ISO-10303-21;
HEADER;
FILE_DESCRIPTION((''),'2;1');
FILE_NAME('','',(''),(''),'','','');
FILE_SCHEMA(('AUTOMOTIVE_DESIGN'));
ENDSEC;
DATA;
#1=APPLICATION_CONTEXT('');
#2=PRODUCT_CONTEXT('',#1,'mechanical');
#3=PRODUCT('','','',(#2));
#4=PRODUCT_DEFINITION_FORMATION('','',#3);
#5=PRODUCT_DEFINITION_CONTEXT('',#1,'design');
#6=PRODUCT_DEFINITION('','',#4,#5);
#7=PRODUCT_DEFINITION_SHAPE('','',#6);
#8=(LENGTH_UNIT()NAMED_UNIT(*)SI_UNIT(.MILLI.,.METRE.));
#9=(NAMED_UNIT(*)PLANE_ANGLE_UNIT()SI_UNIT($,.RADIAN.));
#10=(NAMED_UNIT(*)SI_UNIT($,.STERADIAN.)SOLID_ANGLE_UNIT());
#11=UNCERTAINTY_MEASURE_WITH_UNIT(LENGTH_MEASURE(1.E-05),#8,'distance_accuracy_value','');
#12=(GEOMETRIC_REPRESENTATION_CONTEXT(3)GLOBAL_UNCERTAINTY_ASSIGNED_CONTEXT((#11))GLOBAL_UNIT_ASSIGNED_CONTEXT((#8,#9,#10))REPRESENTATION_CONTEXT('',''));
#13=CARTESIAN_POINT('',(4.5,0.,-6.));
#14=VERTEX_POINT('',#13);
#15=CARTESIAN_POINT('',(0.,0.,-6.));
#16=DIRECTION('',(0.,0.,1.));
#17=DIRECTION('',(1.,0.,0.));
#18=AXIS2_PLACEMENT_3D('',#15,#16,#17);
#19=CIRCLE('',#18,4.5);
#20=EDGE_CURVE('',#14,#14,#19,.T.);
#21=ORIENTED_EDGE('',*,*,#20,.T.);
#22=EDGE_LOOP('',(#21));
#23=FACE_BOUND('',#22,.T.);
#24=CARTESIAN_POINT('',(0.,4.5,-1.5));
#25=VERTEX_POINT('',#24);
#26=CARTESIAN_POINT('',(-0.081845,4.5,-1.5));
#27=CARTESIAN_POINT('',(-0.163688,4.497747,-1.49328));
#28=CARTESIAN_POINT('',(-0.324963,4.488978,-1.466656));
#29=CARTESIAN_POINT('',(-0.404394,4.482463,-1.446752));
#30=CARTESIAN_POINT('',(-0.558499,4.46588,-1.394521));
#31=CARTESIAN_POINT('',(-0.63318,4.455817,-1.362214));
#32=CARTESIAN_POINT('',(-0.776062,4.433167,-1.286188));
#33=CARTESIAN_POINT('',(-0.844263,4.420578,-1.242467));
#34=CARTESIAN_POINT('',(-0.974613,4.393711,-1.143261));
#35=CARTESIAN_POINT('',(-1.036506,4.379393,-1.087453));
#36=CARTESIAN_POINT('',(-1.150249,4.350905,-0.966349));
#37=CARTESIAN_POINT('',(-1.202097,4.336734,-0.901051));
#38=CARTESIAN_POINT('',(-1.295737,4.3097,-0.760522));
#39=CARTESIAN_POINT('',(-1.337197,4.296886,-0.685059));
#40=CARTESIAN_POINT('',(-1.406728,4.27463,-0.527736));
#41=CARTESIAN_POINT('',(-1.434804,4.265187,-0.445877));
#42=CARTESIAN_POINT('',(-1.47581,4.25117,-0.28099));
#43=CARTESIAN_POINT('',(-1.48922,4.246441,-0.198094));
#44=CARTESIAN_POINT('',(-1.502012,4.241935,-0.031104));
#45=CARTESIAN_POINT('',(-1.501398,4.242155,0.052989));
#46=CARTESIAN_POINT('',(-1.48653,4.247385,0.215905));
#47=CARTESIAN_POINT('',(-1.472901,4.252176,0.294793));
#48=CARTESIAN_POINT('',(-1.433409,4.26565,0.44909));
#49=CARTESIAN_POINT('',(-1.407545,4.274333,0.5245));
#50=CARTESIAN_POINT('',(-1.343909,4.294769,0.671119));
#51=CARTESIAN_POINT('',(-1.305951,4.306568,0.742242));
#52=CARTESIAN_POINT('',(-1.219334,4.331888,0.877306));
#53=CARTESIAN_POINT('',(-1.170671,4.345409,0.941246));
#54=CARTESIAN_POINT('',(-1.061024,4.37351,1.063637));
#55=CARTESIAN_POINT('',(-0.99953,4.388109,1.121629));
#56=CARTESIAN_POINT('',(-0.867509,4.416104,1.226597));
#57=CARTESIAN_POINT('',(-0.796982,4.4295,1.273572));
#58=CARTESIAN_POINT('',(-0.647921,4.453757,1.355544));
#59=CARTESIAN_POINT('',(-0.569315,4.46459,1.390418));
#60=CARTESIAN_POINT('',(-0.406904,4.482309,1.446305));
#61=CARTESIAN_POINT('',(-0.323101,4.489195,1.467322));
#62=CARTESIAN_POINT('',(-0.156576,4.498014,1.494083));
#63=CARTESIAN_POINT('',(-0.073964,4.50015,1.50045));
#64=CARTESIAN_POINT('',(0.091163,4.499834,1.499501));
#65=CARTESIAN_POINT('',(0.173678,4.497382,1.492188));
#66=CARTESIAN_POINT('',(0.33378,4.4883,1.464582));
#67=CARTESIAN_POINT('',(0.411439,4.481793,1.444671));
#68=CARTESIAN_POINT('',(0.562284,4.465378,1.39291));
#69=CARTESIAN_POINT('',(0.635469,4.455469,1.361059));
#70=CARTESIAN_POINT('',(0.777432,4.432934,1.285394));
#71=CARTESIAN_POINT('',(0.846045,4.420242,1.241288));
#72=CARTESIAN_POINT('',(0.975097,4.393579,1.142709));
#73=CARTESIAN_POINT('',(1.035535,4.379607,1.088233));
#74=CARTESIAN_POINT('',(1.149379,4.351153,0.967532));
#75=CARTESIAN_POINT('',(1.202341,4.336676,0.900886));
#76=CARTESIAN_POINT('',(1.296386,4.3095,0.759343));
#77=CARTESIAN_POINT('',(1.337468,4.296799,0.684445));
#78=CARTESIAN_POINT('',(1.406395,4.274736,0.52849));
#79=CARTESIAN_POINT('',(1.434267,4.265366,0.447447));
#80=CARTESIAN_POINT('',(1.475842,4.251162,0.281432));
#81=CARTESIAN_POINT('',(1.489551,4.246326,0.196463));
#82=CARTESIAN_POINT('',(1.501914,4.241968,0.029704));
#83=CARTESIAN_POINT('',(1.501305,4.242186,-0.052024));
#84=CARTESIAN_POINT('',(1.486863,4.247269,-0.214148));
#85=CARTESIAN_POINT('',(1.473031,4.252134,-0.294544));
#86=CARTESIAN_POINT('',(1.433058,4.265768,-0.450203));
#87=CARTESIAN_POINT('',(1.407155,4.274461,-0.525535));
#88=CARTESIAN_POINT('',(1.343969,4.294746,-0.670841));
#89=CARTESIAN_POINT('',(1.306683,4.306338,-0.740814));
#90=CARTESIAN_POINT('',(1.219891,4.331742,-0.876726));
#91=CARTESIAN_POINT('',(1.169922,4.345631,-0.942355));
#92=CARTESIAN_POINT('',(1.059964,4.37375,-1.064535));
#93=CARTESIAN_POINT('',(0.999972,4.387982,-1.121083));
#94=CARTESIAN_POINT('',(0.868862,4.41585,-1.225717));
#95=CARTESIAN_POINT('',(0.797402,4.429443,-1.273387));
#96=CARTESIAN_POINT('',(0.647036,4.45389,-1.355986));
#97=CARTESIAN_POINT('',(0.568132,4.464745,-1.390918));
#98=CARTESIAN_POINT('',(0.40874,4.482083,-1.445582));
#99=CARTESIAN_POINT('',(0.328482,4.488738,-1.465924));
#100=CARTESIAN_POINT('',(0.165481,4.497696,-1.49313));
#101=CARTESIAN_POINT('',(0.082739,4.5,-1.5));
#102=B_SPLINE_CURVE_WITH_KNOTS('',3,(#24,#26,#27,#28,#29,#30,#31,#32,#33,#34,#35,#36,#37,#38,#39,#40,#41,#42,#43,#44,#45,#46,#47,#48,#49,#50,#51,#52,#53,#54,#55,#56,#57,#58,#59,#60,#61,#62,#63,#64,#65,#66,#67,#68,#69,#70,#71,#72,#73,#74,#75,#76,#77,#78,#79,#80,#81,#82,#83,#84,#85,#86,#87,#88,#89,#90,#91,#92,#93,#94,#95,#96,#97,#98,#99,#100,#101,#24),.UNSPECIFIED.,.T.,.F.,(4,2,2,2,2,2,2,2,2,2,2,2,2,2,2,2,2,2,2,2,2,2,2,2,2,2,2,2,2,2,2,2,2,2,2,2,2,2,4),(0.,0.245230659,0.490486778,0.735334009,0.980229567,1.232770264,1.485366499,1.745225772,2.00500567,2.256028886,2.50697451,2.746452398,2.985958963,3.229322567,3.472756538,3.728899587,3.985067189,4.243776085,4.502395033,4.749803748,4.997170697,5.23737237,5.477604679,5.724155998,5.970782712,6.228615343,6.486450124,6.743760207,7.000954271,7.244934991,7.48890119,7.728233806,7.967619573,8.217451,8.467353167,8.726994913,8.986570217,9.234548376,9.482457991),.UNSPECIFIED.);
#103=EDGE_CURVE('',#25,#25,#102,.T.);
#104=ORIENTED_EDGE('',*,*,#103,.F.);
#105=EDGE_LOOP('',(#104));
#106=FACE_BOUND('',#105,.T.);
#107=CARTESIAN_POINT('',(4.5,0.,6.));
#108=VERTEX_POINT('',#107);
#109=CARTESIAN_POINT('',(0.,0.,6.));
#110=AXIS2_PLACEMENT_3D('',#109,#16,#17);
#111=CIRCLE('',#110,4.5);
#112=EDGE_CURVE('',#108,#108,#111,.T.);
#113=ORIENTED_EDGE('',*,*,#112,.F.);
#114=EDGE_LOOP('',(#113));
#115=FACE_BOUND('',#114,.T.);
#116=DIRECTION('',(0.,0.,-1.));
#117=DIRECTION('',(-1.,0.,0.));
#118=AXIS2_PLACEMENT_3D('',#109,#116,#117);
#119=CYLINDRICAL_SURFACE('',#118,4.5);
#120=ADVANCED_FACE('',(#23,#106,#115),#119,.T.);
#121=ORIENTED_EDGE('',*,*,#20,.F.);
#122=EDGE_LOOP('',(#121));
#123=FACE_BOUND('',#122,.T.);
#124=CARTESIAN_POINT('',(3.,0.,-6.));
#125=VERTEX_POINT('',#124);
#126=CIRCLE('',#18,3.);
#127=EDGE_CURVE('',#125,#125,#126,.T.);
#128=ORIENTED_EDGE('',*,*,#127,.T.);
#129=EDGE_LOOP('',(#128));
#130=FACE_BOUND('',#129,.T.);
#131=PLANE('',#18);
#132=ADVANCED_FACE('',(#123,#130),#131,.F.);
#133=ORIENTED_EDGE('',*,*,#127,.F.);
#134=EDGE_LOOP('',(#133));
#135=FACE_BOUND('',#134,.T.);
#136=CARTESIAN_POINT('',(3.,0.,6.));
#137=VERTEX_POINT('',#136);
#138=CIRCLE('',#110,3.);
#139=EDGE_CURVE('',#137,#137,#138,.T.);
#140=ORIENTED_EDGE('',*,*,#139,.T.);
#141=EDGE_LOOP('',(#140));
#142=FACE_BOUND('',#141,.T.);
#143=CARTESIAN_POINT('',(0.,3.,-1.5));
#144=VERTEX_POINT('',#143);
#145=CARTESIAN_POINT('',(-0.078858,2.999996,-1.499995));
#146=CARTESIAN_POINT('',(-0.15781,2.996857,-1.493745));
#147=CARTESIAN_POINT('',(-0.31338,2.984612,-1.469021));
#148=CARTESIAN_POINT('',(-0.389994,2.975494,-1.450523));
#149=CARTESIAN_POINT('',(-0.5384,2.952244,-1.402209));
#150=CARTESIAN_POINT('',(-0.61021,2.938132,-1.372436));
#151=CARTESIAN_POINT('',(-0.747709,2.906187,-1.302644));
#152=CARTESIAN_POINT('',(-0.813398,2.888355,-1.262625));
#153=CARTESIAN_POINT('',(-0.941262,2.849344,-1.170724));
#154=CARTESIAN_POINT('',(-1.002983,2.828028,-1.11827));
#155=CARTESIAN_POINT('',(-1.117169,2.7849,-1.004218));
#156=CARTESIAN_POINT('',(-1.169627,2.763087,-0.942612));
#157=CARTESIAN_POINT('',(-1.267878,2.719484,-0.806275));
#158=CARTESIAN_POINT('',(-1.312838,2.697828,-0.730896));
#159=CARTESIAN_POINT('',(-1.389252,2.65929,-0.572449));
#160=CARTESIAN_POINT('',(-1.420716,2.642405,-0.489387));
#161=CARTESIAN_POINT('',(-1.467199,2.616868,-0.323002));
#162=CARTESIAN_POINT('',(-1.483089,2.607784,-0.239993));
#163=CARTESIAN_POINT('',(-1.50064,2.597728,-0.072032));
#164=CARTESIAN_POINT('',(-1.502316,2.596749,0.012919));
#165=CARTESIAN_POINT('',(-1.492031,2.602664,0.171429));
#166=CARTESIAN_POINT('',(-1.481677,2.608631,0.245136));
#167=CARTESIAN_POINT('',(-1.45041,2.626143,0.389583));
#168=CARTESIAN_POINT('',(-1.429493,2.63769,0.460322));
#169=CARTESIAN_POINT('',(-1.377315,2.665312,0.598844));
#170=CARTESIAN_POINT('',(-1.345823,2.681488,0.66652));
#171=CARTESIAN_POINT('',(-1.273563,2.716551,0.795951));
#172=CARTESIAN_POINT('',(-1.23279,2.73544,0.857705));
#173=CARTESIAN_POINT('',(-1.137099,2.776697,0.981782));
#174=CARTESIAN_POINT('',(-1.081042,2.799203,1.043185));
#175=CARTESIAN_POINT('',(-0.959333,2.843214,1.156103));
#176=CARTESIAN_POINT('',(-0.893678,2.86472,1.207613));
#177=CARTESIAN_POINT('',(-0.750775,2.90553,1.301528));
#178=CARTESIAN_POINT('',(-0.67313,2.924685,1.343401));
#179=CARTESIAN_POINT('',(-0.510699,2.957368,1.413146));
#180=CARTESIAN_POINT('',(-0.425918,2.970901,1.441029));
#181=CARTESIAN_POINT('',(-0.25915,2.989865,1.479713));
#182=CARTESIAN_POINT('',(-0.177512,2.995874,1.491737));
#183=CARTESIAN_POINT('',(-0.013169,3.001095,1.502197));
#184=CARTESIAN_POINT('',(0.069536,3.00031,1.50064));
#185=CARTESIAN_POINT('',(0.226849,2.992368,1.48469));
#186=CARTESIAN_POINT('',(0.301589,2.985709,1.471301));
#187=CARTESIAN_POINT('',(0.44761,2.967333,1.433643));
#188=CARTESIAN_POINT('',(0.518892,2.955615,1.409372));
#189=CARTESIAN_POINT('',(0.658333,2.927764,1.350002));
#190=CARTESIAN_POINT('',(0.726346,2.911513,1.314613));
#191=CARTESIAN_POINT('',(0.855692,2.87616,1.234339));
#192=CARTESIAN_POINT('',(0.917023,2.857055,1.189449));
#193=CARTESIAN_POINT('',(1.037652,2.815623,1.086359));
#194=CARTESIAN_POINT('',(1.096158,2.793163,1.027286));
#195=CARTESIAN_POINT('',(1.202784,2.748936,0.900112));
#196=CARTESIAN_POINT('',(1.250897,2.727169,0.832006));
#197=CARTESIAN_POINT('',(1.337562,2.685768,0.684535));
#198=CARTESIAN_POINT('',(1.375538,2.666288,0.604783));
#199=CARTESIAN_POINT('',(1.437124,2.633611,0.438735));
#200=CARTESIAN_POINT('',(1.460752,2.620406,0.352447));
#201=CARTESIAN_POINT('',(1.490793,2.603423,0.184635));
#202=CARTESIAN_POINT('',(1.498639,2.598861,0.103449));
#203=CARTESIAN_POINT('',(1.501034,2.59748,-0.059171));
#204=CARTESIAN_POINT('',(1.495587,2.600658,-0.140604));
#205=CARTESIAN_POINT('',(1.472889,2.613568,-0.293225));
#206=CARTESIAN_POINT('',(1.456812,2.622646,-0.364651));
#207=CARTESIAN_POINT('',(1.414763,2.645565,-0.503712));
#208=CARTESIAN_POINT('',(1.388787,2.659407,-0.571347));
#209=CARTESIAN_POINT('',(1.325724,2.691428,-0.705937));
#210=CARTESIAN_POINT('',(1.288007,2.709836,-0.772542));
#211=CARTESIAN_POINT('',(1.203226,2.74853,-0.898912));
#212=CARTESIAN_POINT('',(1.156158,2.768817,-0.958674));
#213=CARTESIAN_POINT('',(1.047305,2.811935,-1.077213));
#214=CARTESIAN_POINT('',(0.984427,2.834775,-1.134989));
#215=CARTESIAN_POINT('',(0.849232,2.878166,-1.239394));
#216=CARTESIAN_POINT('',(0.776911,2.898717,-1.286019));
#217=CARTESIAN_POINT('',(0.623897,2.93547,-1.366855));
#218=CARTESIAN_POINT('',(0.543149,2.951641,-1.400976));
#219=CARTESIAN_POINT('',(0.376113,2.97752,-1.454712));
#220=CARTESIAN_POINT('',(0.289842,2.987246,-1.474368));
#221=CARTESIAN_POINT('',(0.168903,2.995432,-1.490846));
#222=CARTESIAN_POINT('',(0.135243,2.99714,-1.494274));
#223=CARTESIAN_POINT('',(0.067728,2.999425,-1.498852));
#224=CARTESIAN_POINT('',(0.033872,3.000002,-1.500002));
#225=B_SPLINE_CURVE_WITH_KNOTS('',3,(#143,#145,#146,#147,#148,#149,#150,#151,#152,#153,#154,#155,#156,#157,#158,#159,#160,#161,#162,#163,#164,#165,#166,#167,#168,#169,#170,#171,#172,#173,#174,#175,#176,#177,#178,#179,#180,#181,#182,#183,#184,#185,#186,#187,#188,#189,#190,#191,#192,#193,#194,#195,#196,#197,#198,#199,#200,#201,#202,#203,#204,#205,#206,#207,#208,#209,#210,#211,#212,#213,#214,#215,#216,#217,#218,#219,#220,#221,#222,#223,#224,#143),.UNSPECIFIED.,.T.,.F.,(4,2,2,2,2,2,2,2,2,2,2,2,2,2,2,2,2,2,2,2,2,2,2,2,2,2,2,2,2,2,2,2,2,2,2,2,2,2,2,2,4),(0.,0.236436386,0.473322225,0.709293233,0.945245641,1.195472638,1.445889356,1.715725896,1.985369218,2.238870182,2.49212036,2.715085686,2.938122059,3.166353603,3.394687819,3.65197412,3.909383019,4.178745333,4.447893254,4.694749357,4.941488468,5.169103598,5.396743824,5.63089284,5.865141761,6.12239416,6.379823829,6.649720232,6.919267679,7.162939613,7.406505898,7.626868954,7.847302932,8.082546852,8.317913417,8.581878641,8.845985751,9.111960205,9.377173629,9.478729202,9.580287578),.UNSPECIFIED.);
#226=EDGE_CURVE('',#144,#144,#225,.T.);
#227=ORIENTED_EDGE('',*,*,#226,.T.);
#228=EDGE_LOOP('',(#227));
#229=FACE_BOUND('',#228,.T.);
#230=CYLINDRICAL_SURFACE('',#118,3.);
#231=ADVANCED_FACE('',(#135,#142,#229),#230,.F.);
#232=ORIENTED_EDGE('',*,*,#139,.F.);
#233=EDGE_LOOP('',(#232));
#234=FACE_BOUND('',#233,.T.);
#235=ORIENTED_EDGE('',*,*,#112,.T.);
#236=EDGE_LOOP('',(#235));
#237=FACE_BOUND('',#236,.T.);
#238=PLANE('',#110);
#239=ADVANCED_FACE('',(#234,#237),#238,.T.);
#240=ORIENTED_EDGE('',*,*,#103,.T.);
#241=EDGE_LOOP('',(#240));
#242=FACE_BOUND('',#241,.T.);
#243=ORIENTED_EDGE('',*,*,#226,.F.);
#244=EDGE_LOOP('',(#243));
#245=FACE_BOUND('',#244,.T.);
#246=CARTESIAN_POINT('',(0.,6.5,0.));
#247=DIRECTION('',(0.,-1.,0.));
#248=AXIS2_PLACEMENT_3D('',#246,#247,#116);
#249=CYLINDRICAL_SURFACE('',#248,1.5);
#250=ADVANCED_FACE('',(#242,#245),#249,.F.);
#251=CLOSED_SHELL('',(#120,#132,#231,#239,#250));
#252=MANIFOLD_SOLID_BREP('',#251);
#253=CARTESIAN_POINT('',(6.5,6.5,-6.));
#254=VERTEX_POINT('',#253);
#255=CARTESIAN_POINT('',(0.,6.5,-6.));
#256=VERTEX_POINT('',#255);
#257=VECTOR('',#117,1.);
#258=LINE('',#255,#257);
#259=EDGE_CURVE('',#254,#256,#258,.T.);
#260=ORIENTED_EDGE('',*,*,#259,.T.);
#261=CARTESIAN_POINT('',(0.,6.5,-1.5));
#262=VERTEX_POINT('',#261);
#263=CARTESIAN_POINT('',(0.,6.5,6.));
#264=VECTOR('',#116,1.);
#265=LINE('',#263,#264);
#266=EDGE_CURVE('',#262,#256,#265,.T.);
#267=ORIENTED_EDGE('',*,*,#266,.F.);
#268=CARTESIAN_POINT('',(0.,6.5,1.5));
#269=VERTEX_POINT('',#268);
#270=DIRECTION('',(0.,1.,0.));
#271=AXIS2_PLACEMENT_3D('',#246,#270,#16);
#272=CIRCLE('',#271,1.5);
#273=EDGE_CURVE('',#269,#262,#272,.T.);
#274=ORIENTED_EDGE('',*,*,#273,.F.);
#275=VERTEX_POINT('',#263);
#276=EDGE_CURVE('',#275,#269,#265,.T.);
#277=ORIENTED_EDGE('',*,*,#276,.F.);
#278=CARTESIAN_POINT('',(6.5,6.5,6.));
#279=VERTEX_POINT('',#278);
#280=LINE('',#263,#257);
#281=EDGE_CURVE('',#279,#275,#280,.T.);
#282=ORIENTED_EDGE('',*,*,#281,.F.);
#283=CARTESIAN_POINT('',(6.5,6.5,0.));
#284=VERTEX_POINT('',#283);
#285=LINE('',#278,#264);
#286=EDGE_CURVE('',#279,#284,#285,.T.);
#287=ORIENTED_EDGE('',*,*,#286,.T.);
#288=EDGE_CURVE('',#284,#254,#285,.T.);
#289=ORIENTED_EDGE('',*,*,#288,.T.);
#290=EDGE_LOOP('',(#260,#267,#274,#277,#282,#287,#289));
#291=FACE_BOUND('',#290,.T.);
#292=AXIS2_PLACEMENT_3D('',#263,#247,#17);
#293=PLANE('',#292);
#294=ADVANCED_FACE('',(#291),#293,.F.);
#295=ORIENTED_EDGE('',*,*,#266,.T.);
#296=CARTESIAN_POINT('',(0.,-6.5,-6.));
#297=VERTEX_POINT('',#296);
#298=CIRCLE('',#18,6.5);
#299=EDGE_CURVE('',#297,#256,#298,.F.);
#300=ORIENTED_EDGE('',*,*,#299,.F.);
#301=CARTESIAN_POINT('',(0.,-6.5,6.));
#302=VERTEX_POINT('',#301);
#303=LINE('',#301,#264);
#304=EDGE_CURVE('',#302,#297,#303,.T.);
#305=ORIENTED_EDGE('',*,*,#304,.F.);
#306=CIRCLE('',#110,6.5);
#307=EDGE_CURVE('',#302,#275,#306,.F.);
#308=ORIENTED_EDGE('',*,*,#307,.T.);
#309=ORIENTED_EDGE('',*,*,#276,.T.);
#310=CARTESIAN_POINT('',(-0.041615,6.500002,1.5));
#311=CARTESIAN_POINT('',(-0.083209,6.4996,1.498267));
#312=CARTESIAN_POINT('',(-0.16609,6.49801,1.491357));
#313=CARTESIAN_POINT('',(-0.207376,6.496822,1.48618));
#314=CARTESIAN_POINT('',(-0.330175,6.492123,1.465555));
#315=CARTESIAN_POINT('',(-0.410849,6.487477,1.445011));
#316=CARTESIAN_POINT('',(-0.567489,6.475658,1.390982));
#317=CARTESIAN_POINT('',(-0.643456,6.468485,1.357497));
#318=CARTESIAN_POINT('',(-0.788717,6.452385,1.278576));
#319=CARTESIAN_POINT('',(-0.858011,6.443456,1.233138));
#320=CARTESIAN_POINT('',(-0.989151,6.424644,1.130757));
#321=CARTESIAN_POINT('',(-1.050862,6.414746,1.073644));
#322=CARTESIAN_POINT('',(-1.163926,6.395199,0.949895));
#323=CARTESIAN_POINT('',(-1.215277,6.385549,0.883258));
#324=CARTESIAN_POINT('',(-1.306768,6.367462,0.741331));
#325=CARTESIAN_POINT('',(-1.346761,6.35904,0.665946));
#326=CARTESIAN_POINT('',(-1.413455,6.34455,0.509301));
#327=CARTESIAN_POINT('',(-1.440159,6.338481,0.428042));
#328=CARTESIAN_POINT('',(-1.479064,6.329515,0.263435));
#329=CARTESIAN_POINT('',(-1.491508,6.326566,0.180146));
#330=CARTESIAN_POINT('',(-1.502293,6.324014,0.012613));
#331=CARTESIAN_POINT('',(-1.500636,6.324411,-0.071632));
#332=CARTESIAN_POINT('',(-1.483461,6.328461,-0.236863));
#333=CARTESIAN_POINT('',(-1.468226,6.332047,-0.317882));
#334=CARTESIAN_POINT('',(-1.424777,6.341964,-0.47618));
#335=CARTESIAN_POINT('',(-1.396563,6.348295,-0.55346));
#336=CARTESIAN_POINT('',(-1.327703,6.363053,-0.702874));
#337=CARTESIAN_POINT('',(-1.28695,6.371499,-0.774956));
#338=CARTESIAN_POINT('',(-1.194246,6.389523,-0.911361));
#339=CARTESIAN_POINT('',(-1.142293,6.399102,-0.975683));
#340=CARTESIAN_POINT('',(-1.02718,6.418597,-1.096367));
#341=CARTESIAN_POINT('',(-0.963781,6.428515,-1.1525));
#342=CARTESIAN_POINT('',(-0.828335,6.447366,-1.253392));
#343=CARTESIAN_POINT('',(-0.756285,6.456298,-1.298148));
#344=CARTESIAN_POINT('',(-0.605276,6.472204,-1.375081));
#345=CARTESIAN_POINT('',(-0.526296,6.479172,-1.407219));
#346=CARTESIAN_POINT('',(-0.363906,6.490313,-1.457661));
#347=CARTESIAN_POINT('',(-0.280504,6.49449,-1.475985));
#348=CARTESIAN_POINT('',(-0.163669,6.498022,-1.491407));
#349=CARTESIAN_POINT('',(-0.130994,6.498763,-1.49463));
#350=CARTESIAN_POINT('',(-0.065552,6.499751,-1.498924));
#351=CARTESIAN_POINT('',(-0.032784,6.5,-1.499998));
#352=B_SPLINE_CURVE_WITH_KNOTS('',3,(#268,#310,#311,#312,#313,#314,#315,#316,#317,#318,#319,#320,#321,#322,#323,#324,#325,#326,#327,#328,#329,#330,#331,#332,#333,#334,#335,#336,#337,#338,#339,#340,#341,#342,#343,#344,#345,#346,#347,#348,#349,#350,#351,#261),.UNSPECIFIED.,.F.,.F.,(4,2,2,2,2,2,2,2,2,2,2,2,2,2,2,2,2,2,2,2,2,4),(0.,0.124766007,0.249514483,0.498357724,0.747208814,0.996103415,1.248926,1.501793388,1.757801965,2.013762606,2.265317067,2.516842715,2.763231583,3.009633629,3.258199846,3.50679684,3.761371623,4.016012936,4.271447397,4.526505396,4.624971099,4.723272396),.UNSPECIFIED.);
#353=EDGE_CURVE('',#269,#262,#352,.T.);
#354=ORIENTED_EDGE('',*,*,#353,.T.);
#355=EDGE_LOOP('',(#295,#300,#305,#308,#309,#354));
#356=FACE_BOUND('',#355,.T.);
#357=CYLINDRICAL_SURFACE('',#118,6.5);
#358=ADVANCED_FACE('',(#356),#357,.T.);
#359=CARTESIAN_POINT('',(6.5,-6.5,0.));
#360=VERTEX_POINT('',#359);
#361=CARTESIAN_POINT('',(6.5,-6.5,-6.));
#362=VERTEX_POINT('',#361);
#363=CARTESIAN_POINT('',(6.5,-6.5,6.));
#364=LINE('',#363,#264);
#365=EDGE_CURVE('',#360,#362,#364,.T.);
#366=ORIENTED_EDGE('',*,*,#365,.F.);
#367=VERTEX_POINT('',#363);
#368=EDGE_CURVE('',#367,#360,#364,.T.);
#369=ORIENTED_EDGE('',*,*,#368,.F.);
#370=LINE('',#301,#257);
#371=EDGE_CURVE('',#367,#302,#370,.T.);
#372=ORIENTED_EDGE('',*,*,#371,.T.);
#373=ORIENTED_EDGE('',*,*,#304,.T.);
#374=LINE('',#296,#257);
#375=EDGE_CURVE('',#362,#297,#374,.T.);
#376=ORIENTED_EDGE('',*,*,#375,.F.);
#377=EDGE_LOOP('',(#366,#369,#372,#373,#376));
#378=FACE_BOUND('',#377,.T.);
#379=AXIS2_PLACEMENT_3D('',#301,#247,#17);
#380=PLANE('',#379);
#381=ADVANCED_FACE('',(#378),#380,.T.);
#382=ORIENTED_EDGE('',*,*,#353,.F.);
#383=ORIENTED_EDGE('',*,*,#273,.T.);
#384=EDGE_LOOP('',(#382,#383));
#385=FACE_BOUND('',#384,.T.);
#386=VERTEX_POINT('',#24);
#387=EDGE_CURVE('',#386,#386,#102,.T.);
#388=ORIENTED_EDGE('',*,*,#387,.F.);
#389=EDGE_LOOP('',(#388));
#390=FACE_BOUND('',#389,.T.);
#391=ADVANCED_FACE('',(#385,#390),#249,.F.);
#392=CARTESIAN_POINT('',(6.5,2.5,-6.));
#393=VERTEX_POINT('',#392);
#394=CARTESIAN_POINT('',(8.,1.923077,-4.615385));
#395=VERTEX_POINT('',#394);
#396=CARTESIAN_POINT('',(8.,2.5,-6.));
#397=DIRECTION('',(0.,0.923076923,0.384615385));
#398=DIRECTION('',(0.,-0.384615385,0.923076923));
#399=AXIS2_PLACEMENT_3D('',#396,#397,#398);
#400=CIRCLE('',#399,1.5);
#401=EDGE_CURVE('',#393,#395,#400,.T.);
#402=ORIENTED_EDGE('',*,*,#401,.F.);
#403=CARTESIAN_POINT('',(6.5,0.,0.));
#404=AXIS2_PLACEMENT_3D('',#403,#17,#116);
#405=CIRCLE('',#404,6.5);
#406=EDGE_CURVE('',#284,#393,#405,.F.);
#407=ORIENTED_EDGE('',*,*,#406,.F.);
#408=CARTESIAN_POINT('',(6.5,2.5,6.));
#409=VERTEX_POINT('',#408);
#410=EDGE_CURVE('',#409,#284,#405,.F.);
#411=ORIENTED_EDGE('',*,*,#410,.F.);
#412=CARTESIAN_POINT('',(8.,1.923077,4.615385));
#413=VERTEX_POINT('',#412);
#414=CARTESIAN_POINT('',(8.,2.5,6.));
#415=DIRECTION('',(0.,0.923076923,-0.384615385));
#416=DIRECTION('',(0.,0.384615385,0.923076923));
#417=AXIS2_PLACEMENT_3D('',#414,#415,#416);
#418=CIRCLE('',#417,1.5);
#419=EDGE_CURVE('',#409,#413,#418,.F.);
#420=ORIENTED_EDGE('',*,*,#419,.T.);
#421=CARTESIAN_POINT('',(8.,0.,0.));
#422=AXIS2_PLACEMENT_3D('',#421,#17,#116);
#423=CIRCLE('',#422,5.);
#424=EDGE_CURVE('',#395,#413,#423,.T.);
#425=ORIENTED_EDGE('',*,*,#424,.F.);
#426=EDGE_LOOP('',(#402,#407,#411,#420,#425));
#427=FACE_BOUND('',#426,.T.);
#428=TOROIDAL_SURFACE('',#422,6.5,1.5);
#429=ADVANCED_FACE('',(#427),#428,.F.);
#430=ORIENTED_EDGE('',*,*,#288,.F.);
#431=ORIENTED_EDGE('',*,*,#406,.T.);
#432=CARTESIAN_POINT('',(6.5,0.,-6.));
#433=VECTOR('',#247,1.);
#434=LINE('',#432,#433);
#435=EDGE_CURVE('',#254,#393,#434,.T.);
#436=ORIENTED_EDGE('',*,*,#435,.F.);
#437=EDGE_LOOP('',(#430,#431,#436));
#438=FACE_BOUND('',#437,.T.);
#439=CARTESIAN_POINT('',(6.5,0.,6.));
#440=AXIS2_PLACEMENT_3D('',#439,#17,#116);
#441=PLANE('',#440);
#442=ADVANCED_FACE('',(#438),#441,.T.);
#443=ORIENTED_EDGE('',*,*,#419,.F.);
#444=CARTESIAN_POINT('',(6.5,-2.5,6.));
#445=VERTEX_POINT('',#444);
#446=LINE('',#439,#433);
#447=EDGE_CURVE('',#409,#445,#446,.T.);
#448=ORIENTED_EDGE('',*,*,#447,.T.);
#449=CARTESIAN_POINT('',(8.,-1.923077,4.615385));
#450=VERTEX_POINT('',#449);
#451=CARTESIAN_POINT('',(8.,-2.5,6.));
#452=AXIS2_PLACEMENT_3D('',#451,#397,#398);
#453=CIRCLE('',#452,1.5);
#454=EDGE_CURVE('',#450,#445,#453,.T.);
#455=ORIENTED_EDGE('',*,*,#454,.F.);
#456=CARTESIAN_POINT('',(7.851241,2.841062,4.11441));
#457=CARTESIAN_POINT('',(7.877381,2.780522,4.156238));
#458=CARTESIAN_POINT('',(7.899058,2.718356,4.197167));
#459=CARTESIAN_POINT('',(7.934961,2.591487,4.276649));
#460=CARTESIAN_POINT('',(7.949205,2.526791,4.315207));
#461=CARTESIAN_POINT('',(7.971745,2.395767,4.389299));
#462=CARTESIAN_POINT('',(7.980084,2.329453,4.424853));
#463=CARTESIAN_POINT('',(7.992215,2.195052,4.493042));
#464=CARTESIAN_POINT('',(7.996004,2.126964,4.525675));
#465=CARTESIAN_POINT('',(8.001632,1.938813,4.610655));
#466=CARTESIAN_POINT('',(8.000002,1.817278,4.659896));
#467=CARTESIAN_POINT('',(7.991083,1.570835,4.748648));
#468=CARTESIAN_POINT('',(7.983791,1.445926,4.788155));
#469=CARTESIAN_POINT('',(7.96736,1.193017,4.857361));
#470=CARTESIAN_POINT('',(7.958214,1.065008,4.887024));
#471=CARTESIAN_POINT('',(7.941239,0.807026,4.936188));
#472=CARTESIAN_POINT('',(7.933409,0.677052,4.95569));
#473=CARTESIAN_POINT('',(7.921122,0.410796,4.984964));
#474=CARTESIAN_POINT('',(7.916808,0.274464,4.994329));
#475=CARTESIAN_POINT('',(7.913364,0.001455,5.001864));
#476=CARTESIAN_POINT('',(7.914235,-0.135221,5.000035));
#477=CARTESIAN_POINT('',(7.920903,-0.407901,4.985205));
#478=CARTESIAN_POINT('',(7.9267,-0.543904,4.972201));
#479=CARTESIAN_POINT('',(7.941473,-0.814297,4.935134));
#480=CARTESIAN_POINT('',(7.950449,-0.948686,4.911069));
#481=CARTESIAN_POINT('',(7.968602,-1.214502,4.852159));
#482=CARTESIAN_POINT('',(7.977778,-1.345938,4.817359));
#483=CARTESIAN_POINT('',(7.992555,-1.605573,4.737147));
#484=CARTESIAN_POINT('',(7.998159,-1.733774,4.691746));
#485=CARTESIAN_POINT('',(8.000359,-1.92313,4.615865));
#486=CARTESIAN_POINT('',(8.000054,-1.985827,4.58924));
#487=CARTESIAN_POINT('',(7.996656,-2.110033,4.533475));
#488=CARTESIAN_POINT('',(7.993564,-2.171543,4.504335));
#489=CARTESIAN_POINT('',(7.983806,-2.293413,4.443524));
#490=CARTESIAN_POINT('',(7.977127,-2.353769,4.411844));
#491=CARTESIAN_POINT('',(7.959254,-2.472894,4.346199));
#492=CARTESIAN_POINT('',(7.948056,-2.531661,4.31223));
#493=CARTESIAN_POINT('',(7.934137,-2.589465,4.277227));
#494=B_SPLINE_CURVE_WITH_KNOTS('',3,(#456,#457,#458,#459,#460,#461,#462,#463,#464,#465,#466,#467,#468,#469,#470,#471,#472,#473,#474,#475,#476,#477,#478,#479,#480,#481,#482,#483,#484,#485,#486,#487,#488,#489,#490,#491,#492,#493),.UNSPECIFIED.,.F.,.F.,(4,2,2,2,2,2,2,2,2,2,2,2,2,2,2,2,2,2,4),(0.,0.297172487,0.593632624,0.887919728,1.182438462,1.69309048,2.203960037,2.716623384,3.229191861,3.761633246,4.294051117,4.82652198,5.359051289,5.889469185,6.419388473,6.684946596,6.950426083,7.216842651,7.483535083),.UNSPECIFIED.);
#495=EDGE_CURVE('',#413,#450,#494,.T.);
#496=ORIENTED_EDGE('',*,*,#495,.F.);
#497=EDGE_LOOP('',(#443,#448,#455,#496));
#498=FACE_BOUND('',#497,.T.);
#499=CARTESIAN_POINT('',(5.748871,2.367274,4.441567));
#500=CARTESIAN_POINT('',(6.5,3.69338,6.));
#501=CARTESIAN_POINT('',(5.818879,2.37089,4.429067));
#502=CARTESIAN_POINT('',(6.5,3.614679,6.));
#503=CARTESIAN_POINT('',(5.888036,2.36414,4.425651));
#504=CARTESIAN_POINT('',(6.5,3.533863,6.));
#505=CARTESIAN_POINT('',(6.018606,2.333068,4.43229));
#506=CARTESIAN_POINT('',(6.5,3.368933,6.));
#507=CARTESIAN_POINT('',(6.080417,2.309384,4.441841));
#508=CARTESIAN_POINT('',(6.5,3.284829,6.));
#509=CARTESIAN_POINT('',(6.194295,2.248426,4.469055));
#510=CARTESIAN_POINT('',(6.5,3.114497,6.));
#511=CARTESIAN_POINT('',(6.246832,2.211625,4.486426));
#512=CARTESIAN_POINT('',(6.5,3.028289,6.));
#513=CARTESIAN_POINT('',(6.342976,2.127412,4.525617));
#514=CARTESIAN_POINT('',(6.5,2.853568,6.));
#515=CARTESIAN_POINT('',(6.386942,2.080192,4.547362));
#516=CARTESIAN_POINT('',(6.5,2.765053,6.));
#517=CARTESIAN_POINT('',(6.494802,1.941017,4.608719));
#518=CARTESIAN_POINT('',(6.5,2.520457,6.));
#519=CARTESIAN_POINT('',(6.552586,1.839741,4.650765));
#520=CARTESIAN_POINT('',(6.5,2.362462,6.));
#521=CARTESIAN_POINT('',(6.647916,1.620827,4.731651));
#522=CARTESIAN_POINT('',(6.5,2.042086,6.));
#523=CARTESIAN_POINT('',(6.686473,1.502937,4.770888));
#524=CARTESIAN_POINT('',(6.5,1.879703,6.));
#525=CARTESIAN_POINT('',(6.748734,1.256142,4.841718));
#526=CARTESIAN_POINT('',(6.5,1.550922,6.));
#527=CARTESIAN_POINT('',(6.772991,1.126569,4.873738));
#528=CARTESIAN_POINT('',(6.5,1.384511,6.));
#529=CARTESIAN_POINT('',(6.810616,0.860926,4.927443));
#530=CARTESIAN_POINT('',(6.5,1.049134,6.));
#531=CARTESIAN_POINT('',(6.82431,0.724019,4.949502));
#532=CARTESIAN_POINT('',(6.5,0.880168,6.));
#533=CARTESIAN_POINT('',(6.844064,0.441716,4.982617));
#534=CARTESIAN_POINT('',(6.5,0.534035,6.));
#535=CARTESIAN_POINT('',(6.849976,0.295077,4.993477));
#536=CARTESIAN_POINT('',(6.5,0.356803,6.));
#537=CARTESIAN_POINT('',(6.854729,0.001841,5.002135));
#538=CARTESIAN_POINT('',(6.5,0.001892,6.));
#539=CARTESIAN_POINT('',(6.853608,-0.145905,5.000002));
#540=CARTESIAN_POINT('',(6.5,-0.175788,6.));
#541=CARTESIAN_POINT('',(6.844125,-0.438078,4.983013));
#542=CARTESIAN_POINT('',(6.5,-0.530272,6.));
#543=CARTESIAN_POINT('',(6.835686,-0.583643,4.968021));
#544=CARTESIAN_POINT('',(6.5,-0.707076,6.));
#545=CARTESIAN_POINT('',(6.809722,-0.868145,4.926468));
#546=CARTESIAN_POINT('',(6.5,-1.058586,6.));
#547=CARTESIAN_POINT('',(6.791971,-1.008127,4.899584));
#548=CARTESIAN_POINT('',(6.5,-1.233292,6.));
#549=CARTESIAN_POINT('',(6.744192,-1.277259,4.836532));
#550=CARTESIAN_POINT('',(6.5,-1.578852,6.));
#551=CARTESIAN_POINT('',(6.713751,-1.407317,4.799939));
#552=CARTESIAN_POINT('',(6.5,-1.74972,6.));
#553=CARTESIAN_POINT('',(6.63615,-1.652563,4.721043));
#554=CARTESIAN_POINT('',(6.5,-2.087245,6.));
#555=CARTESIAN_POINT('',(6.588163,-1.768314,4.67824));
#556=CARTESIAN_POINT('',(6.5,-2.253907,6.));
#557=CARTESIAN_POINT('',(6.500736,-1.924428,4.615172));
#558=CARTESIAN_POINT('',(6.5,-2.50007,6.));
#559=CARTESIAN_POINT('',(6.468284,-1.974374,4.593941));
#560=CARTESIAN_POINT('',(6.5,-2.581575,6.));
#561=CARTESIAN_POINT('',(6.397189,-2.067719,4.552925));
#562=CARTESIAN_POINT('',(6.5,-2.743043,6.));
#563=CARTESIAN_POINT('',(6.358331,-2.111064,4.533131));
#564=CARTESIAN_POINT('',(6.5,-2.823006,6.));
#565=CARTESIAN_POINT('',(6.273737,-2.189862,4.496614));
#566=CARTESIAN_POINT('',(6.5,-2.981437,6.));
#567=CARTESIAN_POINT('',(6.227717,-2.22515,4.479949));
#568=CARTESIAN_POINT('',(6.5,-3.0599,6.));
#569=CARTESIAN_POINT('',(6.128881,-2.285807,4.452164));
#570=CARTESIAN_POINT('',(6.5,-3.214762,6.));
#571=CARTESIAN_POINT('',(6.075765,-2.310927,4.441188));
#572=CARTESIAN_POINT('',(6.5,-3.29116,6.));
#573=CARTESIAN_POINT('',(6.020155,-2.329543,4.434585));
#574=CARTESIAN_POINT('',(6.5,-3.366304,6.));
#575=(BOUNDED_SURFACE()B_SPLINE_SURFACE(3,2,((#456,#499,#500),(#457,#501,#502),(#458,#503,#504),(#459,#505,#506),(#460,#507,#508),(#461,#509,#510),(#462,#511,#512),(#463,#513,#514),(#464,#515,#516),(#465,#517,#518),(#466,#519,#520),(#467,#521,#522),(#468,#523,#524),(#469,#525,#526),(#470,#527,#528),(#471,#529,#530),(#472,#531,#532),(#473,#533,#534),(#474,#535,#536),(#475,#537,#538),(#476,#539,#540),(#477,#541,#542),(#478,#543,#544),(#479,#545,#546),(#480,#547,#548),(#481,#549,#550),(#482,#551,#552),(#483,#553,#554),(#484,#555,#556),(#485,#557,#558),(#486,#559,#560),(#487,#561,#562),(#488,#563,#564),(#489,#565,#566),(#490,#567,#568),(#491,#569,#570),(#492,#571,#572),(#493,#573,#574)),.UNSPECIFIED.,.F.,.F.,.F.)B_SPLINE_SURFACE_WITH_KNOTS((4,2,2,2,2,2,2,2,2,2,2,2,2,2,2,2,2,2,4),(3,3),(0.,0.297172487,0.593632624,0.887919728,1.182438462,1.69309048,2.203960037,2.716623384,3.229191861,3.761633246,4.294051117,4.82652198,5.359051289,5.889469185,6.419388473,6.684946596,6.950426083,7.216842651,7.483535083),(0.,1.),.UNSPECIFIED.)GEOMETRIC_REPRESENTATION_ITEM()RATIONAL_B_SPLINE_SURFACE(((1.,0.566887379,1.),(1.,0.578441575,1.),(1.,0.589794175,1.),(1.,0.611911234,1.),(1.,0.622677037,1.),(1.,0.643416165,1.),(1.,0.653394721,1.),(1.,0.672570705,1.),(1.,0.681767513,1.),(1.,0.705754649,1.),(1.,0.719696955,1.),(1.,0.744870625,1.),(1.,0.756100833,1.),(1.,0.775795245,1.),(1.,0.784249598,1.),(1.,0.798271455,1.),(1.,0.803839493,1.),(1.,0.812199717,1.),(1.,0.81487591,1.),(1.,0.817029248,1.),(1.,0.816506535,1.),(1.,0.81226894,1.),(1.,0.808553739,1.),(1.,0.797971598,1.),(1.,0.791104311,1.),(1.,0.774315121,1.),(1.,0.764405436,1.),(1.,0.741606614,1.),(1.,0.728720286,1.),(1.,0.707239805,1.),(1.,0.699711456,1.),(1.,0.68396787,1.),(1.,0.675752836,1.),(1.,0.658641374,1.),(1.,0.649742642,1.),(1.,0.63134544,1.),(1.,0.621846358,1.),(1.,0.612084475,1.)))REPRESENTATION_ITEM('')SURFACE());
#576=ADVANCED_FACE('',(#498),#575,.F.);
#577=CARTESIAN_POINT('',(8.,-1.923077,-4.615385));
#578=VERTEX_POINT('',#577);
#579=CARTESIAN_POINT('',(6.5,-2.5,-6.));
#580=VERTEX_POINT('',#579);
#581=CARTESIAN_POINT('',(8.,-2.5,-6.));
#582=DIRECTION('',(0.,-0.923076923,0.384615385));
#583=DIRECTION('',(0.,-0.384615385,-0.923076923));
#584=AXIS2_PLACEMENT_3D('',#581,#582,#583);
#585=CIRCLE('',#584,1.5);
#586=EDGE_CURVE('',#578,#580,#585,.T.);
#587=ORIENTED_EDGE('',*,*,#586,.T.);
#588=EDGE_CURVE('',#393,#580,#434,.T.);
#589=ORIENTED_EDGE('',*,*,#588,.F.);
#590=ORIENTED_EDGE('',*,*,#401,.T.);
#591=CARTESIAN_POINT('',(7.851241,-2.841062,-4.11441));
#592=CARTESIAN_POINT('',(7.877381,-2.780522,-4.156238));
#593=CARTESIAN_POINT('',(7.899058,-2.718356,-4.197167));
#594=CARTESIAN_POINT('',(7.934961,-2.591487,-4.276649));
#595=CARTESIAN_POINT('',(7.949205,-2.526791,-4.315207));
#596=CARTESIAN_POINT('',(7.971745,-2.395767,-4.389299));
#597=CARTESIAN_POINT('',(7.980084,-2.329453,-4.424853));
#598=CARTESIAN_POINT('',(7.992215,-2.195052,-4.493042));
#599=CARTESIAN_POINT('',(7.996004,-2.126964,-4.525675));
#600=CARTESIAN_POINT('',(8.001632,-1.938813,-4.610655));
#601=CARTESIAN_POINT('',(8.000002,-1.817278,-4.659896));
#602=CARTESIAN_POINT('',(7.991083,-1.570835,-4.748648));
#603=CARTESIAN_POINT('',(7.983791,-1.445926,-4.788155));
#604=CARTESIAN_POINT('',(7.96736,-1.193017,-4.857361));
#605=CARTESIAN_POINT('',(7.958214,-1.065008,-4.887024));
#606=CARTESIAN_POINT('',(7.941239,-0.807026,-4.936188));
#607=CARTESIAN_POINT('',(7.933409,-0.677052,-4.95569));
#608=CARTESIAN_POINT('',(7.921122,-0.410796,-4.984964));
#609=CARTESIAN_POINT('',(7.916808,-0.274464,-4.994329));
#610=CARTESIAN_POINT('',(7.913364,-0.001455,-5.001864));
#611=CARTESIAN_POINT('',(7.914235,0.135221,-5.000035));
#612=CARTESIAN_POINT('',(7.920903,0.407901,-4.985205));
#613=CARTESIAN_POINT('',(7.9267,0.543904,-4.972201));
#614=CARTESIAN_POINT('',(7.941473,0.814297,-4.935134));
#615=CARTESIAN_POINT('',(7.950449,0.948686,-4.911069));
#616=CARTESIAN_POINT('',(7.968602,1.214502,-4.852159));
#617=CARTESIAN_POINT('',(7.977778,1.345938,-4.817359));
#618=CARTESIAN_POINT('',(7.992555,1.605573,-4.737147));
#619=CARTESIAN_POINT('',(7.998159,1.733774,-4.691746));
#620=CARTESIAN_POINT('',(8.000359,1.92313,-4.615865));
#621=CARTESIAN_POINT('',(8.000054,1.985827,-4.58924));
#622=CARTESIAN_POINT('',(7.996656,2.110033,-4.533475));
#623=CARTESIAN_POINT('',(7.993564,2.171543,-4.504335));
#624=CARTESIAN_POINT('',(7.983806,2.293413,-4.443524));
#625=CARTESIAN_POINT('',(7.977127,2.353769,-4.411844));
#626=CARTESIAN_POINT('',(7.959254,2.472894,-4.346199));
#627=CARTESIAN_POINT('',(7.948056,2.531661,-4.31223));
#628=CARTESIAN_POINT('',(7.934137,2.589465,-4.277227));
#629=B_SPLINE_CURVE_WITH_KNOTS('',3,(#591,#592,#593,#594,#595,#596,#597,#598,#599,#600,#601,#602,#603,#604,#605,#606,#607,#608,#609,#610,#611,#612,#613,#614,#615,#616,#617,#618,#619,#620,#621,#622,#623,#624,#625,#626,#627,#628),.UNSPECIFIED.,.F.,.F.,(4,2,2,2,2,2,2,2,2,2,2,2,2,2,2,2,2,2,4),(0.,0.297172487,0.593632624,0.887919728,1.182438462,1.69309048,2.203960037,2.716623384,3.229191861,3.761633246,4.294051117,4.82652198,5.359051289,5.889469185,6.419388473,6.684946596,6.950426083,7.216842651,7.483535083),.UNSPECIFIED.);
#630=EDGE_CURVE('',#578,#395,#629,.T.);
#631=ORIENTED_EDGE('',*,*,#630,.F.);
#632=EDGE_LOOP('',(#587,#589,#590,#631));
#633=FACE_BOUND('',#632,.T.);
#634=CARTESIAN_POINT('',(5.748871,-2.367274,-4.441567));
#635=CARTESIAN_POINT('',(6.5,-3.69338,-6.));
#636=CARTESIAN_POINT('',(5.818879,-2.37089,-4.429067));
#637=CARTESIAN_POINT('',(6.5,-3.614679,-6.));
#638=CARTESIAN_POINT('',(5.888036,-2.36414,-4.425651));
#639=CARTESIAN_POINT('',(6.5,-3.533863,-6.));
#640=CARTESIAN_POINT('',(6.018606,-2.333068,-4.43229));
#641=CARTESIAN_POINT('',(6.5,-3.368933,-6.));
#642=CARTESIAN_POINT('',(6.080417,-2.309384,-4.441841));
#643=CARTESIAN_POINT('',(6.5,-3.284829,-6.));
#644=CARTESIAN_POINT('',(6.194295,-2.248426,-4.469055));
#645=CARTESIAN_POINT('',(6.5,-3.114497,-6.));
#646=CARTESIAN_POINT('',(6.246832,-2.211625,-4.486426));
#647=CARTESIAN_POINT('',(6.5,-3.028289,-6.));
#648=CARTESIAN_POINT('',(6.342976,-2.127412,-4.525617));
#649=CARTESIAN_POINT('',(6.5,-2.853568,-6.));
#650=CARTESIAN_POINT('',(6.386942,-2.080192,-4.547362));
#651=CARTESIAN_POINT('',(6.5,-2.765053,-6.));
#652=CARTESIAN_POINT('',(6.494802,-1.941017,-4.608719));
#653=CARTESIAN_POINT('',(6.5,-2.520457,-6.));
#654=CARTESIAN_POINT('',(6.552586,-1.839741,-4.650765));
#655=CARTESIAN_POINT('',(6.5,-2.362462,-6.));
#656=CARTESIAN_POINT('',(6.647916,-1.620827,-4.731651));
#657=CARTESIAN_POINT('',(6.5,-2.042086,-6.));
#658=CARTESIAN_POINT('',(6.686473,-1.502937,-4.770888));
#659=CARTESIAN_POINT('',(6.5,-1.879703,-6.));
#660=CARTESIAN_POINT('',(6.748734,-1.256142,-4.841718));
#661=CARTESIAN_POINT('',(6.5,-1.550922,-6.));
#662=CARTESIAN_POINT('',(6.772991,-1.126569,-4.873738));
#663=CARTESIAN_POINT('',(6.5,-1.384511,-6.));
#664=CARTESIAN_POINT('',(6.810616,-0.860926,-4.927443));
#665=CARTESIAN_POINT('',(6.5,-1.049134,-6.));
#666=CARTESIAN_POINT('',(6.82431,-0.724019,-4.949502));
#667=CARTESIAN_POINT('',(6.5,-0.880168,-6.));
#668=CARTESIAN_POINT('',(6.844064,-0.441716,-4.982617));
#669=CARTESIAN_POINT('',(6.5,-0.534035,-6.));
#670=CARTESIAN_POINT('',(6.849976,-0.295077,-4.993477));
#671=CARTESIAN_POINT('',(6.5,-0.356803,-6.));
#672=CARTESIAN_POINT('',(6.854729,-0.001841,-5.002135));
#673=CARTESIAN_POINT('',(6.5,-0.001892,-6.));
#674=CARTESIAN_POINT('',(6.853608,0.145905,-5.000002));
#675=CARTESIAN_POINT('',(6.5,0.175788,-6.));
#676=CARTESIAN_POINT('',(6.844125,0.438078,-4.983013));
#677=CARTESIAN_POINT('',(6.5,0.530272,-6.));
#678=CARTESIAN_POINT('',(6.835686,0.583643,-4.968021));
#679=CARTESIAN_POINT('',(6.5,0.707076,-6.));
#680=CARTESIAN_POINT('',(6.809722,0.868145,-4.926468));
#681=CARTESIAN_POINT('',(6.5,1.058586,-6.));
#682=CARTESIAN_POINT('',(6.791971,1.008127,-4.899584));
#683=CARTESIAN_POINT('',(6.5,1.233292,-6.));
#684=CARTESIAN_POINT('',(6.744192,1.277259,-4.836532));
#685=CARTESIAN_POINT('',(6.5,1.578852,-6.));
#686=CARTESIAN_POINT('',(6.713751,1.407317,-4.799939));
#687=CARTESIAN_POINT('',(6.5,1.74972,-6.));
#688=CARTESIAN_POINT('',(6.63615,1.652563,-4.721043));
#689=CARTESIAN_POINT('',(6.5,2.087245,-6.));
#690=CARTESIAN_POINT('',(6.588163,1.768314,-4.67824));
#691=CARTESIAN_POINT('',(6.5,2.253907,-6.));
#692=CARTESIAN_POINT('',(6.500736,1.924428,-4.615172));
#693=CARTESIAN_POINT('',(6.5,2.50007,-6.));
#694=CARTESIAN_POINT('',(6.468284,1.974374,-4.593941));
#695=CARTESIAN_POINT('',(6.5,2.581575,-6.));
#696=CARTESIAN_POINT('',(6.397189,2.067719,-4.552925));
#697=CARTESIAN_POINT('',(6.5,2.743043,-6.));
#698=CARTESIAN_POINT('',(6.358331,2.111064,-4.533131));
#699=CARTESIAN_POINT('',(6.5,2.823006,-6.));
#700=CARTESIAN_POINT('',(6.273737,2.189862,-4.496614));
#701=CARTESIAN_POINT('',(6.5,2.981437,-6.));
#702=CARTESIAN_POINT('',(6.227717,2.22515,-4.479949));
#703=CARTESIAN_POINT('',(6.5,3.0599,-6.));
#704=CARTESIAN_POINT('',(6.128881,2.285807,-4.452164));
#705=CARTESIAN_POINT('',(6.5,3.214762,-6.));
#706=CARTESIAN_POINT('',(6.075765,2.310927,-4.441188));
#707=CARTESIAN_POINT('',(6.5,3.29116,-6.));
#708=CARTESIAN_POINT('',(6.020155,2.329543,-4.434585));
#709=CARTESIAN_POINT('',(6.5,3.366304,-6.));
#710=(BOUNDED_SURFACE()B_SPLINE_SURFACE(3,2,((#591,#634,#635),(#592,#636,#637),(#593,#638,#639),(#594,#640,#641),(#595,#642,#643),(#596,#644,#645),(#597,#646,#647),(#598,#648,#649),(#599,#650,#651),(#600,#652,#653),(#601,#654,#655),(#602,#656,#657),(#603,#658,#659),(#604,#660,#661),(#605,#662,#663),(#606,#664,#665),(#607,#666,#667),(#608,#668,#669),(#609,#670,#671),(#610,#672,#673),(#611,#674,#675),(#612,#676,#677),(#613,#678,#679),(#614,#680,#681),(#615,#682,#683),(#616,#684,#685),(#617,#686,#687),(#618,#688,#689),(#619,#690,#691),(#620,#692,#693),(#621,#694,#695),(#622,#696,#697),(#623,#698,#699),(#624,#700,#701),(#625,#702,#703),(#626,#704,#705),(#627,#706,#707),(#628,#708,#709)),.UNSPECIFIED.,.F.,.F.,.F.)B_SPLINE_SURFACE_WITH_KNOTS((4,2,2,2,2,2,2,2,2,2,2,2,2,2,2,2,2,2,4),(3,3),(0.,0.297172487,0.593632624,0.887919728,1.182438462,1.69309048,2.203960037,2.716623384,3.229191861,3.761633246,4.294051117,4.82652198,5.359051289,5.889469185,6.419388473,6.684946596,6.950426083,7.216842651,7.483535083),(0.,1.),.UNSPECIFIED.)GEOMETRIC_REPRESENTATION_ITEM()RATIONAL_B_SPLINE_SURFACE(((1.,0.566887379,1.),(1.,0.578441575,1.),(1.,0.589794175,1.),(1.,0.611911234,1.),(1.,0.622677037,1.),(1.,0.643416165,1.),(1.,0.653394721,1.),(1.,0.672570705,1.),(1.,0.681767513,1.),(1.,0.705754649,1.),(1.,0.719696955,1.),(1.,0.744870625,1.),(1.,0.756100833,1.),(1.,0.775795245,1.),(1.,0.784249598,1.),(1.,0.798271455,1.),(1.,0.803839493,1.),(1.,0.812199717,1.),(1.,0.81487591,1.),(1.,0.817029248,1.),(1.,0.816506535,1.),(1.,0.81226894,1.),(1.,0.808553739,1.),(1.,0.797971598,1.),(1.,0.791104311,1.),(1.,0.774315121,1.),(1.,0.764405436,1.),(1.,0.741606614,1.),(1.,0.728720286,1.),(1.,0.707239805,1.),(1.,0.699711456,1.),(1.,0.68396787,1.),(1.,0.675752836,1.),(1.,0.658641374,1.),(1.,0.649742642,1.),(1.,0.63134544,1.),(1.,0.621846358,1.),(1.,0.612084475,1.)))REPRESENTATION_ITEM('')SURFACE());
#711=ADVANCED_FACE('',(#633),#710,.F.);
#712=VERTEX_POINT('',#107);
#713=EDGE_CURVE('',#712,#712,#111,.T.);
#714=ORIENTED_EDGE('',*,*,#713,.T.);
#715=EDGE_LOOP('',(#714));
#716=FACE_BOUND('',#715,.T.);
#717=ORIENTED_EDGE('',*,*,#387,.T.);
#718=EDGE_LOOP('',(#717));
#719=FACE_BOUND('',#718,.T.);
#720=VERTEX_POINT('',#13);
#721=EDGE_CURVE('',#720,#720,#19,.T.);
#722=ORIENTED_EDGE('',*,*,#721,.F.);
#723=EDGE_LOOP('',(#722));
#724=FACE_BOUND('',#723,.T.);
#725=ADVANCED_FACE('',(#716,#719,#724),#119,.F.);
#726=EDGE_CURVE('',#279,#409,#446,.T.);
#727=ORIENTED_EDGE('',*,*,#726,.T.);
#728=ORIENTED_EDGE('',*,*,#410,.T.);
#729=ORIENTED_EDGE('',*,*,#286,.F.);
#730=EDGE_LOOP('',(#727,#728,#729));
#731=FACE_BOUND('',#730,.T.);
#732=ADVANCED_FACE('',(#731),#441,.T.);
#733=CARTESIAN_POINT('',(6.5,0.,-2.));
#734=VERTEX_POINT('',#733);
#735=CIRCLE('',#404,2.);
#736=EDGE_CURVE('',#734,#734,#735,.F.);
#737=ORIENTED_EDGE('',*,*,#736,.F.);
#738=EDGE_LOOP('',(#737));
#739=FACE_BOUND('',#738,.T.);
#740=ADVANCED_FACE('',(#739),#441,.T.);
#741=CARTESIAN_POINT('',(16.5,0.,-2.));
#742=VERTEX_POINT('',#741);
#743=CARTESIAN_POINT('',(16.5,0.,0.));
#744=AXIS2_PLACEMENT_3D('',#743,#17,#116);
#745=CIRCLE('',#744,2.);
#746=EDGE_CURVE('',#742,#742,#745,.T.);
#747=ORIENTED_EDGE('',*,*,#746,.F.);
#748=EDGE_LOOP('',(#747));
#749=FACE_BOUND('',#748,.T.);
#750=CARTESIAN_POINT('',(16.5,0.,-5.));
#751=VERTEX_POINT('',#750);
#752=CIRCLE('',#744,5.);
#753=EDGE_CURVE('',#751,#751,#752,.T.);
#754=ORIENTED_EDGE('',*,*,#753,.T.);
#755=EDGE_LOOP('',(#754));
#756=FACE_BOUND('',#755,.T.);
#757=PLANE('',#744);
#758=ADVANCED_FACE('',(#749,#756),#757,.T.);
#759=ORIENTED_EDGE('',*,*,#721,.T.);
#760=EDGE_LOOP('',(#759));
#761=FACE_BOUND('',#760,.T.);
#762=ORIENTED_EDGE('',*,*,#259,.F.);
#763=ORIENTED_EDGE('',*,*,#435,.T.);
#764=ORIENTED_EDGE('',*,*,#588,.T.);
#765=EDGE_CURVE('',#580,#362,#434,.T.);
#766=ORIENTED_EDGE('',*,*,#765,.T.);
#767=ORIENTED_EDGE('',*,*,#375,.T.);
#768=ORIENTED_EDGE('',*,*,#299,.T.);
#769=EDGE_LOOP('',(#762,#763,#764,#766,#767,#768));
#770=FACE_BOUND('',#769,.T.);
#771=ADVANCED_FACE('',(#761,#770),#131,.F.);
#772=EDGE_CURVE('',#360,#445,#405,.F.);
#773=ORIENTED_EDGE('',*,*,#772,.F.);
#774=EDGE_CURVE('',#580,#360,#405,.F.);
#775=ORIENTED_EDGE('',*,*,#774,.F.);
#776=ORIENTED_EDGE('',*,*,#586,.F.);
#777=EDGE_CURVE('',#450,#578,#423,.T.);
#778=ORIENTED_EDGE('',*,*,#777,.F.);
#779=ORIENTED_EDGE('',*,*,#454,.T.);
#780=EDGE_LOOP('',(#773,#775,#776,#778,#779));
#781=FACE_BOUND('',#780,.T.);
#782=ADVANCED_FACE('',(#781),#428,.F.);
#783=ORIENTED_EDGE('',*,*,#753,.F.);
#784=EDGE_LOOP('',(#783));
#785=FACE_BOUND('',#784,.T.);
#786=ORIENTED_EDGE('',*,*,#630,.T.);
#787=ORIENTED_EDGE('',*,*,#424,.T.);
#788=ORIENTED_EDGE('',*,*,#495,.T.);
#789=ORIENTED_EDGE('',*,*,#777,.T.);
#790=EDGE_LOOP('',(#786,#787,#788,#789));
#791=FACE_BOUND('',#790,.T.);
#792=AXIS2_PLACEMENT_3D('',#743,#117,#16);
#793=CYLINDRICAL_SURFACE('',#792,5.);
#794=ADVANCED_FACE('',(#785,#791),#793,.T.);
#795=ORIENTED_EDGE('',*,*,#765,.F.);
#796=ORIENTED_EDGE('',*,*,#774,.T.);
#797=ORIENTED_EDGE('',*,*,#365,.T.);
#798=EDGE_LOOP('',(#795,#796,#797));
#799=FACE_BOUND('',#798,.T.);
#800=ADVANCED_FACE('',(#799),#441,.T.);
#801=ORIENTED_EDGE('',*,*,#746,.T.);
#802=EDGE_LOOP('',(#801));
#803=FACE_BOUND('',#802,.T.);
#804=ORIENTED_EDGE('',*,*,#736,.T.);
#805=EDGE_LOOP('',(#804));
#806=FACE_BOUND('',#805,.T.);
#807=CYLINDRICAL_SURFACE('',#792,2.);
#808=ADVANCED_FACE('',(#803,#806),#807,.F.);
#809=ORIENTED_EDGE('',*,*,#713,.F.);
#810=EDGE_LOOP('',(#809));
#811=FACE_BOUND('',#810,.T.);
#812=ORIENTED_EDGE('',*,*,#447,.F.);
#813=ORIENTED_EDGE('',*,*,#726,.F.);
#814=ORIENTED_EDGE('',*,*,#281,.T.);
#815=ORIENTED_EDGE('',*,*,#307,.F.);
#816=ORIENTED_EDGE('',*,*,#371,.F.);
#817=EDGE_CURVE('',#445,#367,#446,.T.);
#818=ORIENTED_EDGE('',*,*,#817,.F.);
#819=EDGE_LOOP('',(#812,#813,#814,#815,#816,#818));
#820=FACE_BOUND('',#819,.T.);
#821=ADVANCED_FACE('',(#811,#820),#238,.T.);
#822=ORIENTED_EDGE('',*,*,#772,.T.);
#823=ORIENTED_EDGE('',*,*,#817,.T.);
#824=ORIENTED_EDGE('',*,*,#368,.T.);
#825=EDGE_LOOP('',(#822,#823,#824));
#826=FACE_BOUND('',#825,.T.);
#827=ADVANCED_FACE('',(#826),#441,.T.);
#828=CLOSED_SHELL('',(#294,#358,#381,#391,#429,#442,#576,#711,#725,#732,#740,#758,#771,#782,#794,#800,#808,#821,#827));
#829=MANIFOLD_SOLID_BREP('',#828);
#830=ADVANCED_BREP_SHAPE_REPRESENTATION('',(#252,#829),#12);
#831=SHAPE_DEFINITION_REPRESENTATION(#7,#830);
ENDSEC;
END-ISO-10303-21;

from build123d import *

# Parameters (mm, degrees)
SKETCH1_R           = 4.5
BOSS_EXTRUDE1_DEPTH = 6
SKETCH2_R           = 5
SKETCH2_R_2         = 2
BOSS_EXTRUDE2_DEPTH = 10
FILLET1_R           = 1.5
SKETCH1_3_R         = 4.5
SKETCH1_3_R_2       = 3
BOSS_EXTRUDE3_DEPTH = 6
SKETCH3_R           = 1.5
CUT_EXTRUDE1_DEPTH  = 19.721645382


with BuildPart() as part:
    # Sketch1 → Boss-Extrude1 (new, symmetric)
    with BuildSketch(Plane.XY):
        with BuildLine():
            ThreePointArc((0, -6.5), (-6.5, 0), (0, 6.5))
            Line((0, 6.5), (6.5, 6.5))
            Line((6.5, 6.5), (6.5, -6.5))
            Line((6.5, -6.5), (0, -6.5))
        make_face()
        Circle(SKETCH1_R, mode=Mode.SUBTRACT)
    extrude(amount=BOSS_EXTRUDE1_DEPTH, both=True)

    # Sketch2 → Boss-Extrude2 (add)
    with BuildSketch(Plane(origin=(6.5, 0, 0), x_dir=(0, 0, -1), z_dir=(1, 0, 0))):
        Circle(SKETCH2_R)
        Circle(SKETCH2_R_2, mode=Mode.SUBTRACT)
    extrude(amount=BOSS_EXTRUDE2_DEPTH)

    # Fillet1
    fillet1_edges = [part.edges().sort_by_distance(p)[0] for p in [
        (6.5, 0, 5),
    ]]
    fillet(fillet1_edges, radius=FILLET1_R - 0.0001)  # a hair under: the kernel refuses the full size


with BuildPart() as body_2:
    # Sketch1<3> → Boss-Extrude3 (new, symmetric)
    with BuildSketch(Plane.XY):
        Circle(SKETCH1_3_R)
        Circle(SKETCH1_3_R_2, mode=Mode.SUBTRACT)
    extrude(amount=BOSS_EXTRUDE3_DEPTH, both=True)


with BuildPart() as cut_extrude1_tool:
    # Sketch3 → Cut-Extrude1 (new, through all)
    with BuildSketch(Plane(origin=(0, 0, 0), x_dir=(1, 0, 0), z_dir=(0, 1, 0))):
        with Locations(Location((0, 0, 0), (0, 0, 90))):
            Circle(SKETCH3_R)
    extrude(amount=CUT_EXTRUDE1_DEPTH)


with BuildPart() as part_1:
    add(part.part)

    # Cut-Extrude1: cut by cut_extrude1_tool
    add(cut_extrude1_tool.part, mode=Mode.SUBTRACT)


with BuildPart() as body_2_1:
    add(body_2.part)

    # Cut-Extrude1: cut by cut_extrude1_tool
    add(cut_extrude1_tool.part, mode=Mode.SUBTRACT)


solid = Compound([part_1.part, body_2_1.part])
